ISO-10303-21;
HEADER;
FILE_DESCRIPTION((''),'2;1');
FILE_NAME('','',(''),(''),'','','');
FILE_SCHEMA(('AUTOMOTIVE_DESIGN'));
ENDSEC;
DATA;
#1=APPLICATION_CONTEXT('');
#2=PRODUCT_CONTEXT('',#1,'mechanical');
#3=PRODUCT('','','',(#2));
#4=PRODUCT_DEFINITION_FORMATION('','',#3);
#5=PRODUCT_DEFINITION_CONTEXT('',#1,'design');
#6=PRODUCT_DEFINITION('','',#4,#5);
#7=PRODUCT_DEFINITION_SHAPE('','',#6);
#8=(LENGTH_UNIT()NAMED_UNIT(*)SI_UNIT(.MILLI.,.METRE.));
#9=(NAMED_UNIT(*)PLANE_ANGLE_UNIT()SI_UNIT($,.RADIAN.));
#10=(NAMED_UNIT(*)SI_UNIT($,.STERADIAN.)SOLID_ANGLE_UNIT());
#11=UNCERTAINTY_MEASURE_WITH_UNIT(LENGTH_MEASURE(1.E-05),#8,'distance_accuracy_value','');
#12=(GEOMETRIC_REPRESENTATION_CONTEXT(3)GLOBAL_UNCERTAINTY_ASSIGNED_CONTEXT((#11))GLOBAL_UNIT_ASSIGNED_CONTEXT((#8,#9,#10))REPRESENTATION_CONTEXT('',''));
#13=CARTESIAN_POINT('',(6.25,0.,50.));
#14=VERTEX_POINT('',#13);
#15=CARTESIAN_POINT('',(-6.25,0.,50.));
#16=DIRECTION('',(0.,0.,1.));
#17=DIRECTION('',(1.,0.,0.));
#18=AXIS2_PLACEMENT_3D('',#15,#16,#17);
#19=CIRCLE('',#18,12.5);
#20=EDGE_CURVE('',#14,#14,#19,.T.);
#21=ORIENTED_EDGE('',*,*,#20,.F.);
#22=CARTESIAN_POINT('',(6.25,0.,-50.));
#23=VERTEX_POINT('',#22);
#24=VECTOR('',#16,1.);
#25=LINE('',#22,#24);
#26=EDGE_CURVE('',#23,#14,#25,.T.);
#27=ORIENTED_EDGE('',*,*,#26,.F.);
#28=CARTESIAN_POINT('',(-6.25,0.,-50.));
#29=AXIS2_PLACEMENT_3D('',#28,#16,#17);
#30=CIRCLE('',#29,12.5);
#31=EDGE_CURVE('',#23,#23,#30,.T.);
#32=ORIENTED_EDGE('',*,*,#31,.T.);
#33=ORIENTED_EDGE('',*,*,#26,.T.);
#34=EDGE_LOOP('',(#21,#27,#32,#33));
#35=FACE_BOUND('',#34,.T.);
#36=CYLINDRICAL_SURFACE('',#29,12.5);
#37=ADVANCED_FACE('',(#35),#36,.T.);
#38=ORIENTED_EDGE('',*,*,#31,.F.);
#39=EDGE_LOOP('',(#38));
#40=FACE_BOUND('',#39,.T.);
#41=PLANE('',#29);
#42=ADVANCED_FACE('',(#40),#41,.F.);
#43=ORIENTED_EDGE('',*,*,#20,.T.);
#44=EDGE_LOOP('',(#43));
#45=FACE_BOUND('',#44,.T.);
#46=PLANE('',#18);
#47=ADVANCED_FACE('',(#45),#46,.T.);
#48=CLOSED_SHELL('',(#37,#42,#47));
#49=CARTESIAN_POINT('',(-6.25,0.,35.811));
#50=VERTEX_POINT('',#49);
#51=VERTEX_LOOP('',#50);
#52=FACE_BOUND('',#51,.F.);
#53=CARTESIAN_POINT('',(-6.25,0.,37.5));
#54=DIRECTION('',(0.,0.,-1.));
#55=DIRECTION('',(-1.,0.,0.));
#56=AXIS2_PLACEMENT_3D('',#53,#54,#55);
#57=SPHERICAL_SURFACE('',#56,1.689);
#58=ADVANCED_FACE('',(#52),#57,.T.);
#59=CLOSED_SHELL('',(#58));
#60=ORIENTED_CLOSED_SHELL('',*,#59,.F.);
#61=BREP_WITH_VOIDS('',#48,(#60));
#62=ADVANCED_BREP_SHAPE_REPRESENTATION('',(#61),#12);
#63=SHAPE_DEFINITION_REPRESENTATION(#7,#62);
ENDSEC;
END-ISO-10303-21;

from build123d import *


# Not quite as in the source:
# - the program builds the solid bodies; features that only make, move or delete a surface that nothing else refers to are left out


with BuildPart() as f2:
    # F0 (on Front) → F2 (revolve)
    with BuildSketch(Plane.XZ):
        with BuildLine():
            Line((-6.25, -50), (6.25, -50))
            Line((6.25, -50), (6.25, 50))
            Line((6.25, 50), (-6.25, 50))
            Line((-6.25, 50), (-6.25, 39.189))
            ThreePointArc((-6.25, 39.189), (-5.0556966466, 38.6943033534), (-4.561, 37.5))
            ThreePointArc((-4.561, 37.5), (-5.0556966466, 36.3056966466), (-6.25, 35.811))
            Line((-6.25, 35.811), (-6.25, -50))
        make_face()
        with BuildLine():
            ThreePointArc((-6.25, 39.189), (-7.939, 37.5), (-6.25, 35.811))
            Line((-6.25, 35.811), (-6.25, 39.189))
        make_face()
        with BuildLine():
            Line((-6.25, 39.189), (-6.25, 35.811))
            ThreePointArc((-6.25, 35.811), (-5.0556966466, 36.3056966466), (-4.561, 37.5))
            ThreePointArc((-4.561, 37.5), (-5.0556966466, 38.6943033534), (-6.25, 39.189))
        make_face()
    revolve(axis=Axis((-6.25, 0, 0), (0, 0, 1)))


solid = f2.part
